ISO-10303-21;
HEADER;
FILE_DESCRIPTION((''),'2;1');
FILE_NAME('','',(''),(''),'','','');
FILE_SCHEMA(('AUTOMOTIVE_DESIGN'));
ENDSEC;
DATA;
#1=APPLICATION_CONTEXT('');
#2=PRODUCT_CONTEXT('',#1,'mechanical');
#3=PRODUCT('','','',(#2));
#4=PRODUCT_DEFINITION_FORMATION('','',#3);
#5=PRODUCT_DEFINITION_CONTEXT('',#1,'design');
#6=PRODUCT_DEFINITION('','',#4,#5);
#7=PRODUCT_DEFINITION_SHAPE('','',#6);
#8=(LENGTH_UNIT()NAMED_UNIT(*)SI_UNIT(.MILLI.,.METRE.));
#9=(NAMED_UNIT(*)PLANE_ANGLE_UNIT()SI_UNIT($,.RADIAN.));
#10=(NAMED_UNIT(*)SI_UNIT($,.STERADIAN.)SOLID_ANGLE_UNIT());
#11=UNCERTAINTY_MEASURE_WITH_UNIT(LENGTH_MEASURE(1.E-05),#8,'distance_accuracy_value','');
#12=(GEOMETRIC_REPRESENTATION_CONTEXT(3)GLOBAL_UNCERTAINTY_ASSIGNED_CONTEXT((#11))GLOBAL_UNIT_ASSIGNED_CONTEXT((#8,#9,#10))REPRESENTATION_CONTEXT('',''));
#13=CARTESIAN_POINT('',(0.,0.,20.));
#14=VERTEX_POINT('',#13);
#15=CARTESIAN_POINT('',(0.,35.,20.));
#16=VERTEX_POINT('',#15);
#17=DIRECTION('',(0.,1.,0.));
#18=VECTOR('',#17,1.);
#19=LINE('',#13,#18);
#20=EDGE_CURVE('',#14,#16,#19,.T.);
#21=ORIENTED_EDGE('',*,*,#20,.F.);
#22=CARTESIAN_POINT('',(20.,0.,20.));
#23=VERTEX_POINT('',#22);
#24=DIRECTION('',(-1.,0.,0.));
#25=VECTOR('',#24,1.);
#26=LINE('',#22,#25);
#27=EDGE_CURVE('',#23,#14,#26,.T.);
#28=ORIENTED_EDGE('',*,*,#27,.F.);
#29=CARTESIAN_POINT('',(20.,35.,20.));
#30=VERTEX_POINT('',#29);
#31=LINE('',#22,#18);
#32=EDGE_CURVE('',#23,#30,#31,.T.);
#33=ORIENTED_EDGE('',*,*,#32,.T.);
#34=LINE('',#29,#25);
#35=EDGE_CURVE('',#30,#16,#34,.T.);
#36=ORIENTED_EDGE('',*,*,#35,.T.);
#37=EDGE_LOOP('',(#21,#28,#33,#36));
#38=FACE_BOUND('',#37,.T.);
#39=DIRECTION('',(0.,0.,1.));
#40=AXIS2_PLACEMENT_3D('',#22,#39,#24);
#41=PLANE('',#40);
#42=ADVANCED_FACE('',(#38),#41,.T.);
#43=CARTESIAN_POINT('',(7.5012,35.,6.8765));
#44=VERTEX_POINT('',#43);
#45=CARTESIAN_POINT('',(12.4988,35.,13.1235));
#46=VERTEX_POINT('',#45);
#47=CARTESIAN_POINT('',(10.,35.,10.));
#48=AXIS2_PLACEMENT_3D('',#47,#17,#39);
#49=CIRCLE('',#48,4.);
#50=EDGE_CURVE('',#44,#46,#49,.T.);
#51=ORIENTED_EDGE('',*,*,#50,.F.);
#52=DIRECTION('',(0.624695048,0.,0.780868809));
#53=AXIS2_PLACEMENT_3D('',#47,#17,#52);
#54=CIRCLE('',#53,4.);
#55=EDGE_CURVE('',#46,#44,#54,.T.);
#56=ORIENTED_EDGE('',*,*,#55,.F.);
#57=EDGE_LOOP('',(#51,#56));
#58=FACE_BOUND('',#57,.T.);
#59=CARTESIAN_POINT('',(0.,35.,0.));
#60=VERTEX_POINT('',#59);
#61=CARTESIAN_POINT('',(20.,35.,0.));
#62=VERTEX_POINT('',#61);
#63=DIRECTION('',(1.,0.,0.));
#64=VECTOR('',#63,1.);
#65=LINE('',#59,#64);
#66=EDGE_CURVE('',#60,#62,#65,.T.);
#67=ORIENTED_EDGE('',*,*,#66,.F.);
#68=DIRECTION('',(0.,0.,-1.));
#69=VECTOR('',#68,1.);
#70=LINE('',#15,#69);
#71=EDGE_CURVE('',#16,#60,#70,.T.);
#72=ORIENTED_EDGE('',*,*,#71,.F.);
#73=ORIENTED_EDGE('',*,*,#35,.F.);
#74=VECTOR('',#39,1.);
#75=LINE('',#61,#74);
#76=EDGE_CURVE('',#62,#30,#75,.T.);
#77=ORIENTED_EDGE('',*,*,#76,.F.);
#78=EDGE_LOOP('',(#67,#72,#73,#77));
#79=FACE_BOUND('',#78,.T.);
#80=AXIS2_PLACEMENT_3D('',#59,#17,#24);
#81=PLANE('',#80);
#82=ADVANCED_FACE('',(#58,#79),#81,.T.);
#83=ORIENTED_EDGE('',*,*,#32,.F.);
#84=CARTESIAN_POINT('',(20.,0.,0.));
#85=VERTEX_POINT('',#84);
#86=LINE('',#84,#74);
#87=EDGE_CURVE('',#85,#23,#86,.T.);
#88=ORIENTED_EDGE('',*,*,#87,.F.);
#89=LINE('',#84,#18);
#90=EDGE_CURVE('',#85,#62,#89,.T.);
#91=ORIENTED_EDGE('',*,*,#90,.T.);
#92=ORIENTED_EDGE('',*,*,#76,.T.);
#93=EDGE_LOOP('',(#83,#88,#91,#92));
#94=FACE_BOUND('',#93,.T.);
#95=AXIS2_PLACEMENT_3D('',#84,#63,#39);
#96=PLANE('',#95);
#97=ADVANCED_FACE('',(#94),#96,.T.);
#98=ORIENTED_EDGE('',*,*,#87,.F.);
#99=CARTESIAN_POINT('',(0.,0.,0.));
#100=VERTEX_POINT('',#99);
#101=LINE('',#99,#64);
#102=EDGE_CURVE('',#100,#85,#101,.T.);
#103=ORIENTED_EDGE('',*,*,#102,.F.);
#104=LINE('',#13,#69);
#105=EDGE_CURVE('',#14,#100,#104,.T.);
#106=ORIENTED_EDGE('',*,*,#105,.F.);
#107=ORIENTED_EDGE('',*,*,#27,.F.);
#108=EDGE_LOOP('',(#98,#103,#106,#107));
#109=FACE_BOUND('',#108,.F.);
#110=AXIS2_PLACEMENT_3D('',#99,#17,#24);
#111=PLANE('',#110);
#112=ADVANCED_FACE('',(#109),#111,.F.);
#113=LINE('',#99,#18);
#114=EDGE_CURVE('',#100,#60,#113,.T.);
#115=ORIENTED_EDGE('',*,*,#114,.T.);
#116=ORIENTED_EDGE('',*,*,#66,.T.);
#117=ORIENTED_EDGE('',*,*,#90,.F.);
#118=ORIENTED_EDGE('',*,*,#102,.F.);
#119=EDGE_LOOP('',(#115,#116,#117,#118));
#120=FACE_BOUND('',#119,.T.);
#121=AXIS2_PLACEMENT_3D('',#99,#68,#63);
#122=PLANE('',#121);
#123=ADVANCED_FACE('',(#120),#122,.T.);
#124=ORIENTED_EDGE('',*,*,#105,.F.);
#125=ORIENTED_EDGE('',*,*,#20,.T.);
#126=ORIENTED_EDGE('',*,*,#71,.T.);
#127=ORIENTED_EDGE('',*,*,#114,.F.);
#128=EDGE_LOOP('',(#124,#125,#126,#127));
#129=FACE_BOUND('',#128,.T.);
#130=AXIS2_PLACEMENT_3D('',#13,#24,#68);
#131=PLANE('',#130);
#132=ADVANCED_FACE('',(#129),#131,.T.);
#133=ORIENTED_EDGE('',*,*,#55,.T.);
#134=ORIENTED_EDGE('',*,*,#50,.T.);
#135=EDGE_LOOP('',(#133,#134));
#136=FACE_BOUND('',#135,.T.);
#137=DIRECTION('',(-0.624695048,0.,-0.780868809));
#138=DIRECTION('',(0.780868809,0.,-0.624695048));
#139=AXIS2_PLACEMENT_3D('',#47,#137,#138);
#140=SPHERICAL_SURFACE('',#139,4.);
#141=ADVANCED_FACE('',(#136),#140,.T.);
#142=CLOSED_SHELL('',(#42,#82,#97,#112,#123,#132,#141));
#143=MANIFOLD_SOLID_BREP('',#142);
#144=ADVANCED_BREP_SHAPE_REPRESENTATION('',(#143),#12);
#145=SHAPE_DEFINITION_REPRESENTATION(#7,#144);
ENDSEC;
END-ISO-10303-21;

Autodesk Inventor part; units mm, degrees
ref_plane "YZ Plane" through (0, 0, 0) normal (1, 0, 0) x (0, 1, 0)
ref_plane "XZ Plane" through (0, 0, 0) normal (0, 1, 0) x (-1, 0, 0)
ref_plane "XY Plane" through (0, 0, 0) normal (0, 0, 1) x (1, 0, 0)
sketch "スケッチ1" plane through (0, 0, 0) normal (0, 1, 0) x (-1, 0, 0)
  line L0 (0, 0) -> (-20, 0)
  line L1 (-20, 0) -> (-20, 20)
  line L2 (-20, 20) -> (0, 20)
  line L3 (0, 20) -> (0, 0)
  dimension "d0" = 20
  dimension "d1" = 20
extrude "押し出し1" add sketch "スケッチ1" along normal blind 35
sketch "スケッチ2" plane through (0, 35, 0) normal (0, 1, 0) x (1, 0, 0)
  line L0 (20, 0) -> (0, 0) projected
  line L1 (0, 0) -> (0, -20) projected
  line L2 (0, -20) -> (20, -20) projected
  line L3 (20, -20) -> (20, 0) projected
  line L4 (0, -10) -> (20, -10)
  line L5 (10, 0) -> (10, -20)
  circle A0 centre (10, -10) radius 4
  line L6 (12.4988, -13.1235) -> (7.5012, -6.8765)
  dimension "d4" = 8
revolve "回転1" add sketch "スケッチ2" angle 360 about axis through (12.4988, 35, 13.1235) along (-0.6246951, 0, -0.7808688) picked at (12.2437, -8.5902) picked at (8.5873, -7.7581) picked at (11.8763, -11.8713) contours A0 L4 L5 | L5 L6 A0 | A0 L6 L4
sketch "スケッチ3" plane through (0, 0, 0) normal (0, -1, 0) x (1, 0, 0)
  line L0 (0, 0) -> (20, 0) projected
  line L1 (20, 0) -> (20, 20) projected
  line L2 (20, 20) -> (0, 20) projected
  line L3 (0, 20) -> (0, 0) projected
  line L4 (20, 20) -> (0, 0)
  line L5 (0, 20) -> (20, 0)
  point P0 (10, 10)
properties part number "知能ロボコンボールキャスタ"
